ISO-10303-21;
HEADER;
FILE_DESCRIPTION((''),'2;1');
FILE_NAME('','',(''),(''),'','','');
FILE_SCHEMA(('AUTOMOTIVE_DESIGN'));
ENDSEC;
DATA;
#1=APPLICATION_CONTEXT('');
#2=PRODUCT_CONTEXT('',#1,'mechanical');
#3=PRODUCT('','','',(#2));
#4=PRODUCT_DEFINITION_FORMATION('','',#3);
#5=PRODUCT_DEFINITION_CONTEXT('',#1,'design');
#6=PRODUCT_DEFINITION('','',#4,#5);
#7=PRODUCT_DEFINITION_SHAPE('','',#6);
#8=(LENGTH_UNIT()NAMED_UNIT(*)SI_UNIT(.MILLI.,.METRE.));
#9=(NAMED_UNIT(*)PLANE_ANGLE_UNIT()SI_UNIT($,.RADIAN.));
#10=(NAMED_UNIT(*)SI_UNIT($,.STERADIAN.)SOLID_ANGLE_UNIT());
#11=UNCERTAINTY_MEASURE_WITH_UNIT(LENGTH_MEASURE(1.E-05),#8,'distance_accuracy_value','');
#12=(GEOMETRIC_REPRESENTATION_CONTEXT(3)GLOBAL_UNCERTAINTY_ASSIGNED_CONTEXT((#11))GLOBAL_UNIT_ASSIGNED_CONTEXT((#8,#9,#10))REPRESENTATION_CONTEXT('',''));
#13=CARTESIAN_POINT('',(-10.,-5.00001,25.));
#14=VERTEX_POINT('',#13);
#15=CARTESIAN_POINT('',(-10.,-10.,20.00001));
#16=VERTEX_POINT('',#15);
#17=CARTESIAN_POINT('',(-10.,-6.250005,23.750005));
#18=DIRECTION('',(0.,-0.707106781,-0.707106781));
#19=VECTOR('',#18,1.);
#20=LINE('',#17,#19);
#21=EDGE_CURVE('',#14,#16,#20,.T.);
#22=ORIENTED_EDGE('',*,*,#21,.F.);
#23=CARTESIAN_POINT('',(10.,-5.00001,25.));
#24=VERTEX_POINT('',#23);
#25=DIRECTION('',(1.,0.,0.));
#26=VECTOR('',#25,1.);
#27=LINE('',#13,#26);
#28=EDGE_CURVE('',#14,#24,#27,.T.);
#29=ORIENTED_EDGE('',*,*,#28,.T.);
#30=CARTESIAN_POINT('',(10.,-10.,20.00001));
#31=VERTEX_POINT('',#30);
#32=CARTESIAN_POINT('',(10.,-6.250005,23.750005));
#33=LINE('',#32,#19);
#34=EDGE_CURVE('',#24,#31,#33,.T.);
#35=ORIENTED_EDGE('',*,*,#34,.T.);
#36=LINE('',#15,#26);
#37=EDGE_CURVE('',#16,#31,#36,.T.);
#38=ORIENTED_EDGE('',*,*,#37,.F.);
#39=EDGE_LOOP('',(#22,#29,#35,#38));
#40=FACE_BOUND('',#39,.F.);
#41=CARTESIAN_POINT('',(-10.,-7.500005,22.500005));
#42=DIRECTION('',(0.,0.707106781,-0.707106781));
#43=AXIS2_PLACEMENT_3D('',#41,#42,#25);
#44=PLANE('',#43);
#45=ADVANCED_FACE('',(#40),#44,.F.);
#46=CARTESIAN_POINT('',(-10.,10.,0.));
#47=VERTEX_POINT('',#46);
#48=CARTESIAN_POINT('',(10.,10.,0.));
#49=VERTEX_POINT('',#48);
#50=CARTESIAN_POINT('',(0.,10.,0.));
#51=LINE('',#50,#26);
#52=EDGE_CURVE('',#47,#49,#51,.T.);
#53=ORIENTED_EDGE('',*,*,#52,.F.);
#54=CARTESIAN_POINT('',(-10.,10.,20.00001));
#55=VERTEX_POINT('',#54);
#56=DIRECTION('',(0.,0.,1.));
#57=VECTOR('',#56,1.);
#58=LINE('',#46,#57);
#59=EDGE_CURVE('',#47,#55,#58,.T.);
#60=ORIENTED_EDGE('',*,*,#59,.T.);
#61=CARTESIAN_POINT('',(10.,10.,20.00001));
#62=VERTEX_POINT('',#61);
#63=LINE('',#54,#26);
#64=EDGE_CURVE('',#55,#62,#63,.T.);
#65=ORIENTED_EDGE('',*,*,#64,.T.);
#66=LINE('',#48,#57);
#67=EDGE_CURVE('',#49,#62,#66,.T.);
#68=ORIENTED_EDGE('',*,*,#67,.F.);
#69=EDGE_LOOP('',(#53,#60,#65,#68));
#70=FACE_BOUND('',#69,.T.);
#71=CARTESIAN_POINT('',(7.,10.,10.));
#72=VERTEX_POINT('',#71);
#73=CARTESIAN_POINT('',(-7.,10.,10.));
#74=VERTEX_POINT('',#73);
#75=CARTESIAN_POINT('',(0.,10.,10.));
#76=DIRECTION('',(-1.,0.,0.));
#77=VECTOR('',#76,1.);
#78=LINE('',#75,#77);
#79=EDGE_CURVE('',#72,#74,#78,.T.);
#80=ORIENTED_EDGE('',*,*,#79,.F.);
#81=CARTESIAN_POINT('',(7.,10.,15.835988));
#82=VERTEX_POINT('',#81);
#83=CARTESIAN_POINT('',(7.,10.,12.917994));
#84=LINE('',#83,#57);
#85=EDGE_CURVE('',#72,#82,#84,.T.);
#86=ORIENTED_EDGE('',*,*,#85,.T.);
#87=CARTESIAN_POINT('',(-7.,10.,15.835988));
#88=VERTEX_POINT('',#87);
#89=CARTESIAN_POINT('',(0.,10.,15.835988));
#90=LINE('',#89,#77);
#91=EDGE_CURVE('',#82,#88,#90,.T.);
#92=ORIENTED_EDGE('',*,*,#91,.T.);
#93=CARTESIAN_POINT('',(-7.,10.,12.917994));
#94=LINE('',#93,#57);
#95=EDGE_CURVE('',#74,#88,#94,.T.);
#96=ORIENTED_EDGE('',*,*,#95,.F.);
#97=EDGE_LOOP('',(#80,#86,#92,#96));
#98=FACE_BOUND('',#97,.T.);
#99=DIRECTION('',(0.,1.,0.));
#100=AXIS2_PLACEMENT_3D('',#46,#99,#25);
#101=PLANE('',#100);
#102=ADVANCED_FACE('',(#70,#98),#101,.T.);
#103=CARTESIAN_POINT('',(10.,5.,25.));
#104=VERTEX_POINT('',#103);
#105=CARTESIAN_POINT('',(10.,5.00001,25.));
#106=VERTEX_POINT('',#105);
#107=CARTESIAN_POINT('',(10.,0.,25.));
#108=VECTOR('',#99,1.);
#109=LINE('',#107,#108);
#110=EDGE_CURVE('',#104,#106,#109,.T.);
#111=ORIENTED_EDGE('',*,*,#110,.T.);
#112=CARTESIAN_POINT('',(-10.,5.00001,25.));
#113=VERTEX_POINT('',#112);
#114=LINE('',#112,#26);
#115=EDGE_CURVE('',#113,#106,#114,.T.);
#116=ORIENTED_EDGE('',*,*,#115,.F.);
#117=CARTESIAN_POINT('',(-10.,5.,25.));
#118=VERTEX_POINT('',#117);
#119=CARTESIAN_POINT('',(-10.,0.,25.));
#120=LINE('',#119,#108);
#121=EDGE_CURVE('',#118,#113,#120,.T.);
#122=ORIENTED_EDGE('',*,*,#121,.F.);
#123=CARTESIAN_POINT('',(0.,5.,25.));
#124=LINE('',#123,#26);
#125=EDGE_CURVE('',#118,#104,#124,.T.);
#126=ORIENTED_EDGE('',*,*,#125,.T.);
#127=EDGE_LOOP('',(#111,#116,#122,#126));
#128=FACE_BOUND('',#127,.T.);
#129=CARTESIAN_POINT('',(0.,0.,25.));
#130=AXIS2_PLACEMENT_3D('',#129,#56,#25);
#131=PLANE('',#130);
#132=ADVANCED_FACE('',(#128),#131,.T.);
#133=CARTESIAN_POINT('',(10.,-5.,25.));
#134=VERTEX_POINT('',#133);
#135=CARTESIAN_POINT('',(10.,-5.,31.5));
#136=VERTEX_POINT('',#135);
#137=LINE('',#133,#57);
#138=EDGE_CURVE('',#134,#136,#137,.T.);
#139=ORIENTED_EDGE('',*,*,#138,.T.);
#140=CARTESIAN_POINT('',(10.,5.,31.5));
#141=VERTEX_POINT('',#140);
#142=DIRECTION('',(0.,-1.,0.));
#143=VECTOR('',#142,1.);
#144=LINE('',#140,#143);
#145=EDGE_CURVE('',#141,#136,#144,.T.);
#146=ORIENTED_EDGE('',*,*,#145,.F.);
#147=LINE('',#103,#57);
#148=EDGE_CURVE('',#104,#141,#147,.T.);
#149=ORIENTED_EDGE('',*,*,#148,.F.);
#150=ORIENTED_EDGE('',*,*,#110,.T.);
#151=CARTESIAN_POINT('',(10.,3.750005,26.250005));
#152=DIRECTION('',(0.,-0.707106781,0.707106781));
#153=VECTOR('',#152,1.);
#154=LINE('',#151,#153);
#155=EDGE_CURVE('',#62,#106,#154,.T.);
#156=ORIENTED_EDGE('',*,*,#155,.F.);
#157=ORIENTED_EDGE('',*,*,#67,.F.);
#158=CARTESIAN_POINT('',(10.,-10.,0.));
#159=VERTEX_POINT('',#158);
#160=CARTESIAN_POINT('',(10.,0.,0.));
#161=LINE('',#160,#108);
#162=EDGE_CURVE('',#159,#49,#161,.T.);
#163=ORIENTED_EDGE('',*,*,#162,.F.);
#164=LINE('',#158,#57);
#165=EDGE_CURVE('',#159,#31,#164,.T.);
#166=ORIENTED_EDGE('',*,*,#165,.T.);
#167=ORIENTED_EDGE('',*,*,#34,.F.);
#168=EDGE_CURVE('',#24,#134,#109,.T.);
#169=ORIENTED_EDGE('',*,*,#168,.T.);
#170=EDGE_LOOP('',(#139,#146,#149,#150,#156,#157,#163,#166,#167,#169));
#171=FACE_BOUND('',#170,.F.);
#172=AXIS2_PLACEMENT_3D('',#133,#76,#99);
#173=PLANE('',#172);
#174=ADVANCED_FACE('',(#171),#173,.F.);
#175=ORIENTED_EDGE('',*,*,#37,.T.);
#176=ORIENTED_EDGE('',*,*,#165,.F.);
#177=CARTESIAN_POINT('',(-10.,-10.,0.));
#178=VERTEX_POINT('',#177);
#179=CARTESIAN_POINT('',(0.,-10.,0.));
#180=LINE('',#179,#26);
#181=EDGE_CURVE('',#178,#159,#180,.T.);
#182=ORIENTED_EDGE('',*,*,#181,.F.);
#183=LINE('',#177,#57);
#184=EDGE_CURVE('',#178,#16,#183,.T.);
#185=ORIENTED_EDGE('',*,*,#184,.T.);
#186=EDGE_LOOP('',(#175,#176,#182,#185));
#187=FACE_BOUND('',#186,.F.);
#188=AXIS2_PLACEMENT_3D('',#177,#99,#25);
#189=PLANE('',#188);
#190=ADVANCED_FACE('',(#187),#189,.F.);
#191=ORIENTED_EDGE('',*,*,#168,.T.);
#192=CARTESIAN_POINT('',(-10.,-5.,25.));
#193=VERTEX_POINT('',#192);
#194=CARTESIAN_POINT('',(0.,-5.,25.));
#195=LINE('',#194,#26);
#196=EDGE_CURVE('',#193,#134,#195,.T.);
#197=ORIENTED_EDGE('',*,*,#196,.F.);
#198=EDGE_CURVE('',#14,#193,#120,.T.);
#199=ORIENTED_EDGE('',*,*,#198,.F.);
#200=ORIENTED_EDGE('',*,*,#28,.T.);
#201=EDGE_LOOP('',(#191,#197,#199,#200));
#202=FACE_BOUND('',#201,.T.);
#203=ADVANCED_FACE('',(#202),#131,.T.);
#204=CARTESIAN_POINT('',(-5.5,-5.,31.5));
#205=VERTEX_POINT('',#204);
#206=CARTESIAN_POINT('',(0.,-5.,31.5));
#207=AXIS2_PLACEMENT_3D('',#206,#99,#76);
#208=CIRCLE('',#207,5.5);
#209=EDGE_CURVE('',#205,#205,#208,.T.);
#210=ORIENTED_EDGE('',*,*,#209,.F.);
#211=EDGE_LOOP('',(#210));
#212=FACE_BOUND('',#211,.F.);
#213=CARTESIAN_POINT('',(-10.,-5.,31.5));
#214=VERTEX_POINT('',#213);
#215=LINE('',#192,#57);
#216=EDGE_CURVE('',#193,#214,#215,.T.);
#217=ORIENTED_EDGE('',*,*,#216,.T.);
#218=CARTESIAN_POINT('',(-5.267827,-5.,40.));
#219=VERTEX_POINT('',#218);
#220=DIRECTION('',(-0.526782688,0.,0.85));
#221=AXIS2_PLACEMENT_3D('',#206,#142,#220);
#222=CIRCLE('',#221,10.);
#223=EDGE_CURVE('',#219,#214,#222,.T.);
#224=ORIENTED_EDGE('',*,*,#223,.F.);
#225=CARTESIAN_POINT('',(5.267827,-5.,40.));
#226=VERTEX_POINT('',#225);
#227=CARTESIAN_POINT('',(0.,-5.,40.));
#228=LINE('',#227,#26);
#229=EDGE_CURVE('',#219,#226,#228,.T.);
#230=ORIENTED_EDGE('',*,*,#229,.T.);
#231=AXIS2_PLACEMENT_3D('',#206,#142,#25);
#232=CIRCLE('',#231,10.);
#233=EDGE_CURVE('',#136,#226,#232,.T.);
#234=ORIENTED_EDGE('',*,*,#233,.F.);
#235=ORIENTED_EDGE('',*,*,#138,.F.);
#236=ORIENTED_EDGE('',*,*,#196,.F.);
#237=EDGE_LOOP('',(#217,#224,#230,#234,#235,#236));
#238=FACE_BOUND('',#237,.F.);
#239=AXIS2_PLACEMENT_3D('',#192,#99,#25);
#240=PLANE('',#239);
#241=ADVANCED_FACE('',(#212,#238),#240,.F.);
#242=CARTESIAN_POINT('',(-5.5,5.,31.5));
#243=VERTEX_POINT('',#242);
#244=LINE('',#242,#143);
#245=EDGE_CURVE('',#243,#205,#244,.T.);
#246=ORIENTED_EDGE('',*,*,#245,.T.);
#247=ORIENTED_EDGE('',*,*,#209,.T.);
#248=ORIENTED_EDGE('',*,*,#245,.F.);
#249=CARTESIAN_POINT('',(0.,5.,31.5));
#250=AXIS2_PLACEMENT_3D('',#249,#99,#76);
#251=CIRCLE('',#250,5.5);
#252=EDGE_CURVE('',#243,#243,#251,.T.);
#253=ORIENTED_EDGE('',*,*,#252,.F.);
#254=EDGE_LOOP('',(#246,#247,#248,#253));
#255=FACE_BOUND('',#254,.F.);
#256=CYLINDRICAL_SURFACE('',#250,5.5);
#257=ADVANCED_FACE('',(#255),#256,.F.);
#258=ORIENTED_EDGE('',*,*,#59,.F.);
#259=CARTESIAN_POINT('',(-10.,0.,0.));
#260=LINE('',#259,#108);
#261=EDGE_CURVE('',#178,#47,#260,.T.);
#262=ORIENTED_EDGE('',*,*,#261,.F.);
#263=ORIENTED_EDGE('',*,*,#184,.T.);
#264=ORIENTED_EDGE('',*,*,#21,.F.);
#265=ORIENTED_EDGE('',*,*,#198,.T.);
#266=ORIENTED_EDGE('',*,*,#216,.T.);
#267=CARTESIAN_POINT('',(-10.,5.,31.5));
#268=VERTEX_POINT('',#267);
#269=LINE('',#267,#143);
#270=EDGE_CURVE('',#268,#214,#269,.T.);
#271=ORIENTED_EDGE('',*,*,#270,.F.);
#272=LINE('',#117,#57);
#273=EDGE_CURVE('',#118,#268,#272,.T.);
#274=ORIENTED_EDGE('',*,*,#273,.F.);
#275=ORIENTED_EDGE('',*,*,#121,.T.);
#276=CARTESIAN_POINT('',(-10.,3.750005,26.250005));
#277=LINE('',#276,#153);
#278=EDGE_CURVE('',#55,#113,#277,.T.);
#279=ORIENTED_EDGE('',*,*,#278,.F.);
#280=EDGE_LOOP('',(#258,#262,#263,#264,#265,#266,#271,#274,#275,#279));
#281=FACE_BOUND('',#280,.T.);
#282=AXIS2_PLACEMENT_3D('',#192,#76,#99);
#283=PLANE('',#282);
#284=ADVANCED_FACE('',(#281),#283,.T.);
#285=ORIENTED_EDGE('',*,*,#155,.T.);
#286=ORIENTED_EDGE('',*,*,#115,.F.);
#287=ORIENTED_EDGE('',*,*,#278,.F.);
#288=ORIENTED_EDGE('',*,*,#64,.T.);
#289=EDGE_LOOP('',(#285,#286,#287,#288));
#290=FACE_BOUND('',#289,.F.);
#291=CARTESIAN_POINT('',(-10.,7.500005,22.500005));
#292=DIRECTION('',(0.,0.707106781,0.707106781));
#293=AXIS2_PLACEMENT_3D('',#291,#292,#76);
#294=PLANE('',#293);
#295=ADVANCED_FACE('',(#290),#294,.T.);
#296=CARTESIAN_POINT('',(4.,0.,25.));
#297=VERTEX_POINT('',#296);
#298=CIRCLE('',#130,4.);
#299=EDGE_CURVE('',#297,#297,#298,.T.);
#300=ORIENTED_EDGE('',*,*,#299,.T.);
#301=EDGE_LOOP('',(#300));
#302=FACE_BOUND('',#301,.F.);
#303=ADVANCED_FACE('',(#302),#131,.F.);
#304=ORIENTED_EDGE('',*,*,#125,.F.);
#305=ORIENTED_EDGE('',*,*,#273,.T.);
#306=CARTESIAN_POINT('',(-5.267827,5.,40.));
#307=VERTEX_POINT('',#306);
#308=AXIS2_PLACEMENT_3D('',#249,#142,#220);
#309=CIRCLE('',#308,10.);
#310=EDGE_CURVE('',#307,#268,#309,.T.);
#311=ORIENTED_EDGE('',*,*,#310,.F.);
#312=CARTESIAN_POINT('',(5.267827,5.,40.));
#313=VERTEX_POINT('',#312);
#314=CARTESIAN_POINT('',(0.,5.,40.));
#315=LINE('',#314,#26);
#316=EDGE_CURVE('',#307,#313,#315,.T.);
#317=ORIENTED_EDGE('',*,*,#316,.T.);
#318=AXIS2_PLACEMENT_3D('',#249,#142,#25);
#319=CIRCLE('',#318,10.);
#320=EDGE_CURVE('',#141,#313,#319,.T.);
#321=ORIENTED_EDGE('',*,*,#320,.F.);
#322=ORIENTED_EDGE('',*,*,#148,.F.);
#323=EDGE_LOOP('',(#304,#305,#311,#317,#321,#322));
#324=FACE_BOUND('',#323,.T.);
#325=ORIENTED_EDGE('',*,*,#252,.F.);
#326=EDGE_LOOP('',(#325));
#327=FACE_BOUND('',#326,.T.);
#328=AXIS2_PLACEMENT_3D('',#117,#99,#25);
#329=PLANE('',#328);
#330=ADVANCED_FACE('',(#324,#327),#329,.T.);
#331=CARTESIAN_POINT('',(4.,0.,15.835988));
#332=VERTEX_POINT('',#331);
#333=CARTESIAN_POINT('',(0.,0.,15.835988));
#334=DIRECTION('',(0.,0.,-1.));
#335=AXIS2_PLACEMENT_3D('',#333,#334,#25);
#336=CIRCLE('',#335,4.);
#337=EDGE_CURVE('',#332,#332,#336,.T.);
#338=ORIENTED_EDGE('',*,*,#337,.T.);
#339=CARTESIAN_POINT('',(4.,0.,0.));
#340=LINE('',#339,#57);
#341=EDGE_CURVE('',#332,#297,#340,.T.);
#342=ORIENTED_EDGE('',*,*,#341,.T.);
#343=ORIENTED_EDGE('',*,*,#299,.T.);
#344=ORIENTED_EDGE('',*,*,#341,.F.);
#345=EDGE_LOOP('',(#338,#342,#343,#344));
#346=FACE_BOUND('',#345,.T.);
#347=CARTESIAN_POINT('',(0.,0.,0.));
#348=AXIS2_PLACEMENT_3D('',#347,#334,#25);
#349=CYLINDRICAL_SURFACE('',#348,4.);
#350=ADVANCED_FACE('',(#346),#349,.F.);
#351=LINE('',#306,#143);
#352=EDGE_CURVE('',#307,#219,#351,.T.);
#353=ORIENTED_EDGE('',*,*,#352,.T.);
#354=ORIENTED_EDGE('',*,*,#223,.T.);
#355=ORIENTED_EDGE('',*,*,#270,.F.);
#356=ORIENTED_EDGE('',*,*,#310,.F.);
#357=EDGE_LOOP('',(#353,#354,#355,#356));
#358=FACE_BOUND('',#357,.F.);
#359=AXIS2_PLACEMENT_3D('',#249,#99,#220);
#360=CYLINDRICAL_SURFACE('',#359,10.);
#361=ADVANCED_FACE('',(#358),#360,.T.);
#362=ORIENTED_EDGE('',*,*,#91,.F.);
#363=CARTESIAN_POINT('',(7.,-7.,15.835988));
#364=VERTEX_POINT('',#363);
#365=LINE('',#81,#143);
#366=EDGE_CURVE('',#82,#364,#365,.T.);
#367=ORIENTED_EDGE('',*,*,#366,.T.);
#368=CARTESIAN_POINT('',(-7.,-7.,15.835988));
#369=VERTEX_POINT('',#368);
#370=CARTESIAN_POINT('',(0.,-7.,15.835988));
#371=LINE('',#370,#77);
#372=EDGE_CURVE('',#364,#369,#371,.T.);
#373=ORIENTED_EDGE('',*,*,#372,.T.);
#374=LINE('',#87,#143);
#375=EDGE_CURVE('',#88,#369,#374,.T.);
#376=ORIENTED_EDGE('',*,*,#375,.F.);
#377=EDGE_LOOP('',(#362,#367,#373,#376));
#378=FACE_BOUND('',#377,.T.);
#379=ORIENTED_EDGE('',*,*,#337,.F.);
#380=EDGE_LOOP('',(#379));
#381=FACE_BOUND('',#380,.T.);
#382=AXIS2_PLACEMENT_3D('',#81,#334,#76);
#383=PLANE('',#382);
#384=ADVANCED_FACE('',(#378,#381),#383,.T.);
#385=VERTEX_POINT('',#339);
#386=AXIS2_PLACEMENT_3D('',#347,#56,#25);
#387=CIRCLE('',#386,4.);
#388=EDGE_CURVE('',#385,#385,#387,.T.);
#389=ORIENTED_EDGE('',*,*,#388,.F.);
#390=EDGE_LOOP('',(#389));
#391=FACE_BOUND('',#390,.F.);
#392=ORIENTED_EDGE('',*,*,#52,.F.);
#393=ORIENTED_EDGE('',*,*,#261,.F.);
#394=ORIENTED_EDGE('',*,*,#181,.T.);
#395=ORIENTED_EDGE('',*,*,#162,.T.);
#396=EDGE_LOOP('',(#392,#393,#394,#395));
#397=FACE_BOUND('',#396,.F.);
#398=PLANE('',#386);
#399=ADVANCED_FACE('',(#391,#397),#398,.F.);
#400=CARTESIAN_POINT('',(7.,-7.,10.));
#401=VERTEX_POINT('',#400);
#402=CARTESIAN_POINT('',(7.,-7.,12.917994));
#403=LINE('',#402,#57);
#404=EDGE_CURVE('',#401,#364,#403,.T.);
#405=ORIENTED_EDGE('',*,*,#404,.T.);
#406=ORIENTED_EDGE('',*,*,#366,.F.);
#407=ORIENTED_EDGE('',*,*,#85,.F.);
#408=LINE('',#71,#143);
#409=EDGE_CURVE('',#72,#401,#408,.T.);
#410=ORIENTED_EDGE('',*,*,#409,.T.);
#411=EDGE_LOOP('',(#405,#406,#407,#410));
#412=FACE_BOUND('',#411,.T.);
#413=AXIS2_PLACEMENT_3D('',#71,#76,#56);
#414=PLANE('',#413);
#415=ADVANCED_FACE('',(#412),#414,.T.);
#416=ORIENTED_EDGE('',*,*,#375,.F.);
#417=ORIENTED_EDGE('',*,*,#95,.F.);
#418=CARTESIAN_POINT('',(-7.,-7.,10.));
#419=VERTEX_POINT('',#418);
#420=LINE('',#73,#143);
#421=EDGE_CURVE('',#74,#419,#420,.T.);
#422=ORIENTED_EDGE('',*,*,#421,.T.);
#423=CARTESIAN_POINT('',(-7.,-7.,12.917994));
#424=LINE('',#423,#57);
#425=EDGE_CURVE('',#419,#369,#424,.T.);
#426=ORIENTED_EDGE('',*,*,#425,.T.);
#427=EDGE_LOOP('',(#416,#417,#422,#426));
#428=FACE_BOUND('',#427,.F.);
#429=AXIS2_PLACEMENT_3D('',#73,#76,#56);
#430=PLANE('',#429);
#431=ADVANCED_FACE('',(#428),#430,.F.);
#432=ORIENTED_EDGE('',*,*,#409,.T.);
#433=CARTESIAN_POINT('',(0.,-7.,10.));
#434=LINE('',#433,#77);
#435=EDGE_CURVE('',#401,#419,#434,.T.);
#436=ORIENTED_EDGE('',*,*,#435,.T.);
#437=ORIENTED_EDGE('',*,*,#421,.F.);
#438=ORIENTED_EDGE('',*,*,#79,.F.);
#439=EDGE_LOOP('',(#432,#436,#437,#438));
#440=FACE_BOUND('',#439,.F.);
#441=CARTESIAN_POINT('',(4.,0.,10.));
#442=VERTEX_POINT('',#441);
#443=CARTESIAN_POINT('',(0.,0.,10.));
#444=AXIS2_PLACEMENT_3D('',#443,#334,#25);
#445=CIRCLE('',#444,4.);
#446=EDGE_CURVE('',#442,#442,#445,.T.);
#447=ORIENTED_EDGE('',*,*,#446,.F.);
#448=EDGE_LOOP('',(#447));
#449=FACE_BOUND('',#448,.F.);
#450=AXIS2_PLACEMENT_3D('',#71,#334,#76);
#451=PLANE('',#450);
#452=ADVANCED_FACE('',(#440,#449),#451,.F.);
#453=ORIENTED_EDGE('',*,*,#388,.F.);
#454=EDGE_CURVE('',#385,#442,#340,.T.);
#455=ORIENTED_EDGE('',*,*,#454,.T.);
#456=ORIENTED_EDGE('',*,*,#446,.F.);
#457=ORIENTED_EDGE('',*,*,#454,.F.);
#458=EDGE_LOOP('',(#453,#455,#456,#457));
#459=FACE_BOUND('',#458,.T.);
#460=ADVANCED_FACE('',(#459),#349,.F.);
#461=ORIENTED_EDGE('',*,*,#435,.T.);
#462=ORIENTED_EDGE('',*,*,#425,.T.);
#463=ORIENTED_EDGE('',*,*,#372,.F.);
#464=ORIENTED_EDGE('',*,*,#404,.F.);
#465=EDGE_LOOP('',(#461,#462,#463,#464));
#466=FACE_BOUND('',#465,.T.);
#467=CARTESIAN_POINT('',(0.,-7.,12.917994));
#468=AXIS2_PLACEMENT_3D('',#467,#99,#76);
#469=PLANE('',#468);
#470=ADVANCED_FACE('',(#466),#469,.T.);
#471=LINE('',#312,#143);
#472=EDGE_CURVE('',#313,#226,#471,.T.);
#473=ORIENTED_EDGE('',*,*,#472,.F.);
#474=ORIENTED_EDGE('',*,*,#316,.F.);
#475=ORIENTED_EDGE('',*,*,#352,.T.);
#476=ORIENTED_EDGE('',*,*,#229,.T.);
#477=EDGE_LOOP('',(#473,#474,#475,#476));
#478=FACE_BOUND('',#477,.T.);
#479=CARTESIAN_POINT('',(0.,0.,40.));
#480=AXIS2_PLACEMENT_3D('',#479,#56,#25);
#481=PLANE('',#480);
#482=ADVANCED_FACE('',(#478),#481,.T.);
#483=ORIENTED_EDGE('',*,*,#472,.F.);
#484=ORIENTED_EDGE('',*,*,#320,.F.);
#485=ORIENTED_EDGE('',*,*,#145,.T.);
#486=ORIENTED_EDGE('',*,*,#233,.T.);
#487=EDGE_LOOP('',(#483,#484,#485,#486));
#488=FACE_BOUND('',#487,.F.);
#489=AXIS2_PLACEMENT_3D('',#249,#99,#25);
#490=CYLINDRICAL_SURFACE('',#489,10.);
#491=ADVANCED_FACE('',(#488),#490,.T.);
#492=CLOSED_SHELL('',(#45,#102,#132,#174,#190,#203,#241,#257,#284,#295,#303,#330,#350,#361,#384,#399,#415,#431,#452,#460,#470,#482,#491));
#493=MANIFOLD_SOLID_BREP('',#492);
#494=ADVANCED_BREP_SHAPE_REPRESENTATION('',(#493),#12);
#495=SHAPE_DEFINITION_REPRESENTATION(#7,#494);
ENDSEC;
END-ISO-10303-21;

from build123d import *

# Parameters (mm, degrees)
F0_W      = 20
F0_H      = 20
F0_R      = 4
F1_DEPTH  = 25
F3_W      = 14
F3_H      = 5.8359876275
F4_DEPTH  = 17
F6_W      = 20
F6_H      = 10
F7_DEPTH  = 15
F10_DEPTH = 10
F9_R      = 5.5
F11_DEPTH = 10
F12_SIZE  = 4.99999


# Not quite as in the source:
# - a fillet or chamfer is up to 0.001 mm smaller than in the source, because OpenCascade refuses the exact size


with BuildPart() as f1:
    # F0 (on Top) → F1 (new body)
    with BuildSketch(Plane.XY):
        Rectangle(F0_W, F0_H)
        Circle(F0_R, mode=Mode.SUBTRACT)
    extrude(amount=F1_DEPTH)

    # F3 (on offset) → F4 (cut)
    with BuildSketch(Plane(origin=(0, 10, 0), x_dir=(-1, 0, 0), z_dir=(0, 1, 0))):
        with Locations((0, 12.9179938138)):
            Rectangle(F3_W, F3_H)
    extrude(amount=-F4_DEPTH, mode=Mode.SUBTRACT)

    # F6 (on offset) → F7 (join)
    with BuildSketch(Plane.XY.offset(25)):
        Rectangle(F6_W, F6_H)
    extrude(amount=F7_DEPTH)

    # F9 (on offset) → F10 (cut)
    with BuildSketch(Plane(origin=(0, 5, 0), x_dir=(-1, 0, 0), z_dir=(0, 1, 0))):
        with BuildLine():
            Line((-5.2678268764, 40), (-10, 40))
            Line((-10, 40), (-10, 31.5))
            ThreePointArc((-10, 31.5), (-8.7372269275, 36.3642435813), (-5.2678268764, 40))
        make_face()
        with BuildLine():
            Line((10, 40), (5.2678268764, 40))
            ThreePointArc((5.2678268764, 40), (8.7372269275, 36.3642435813), (10, 31.5))
            Line((10, 31.5), (10, 40))
        make_face()
    extrude(amount=-F10_DEPTH, mode=Mode.SUBTRACT)

    # F9 (on offset) → F11 (cut)
    with BuildSketch(Plane(origin=(0, 5, 0), x_dir=(-1, 0, 0), z_dir=(0, 1, 0))):
        with Locations((0, 31.5)):
            Circle(F9_R)
    extrude(amount=-F11_DEPTH, mode=Mode.SUBTRACT)

    # F12 (size 5 in the source; OpenCascade refuses exactly that, so slightly less here)
    f12_edges = [f1.edges().sort_by_distance(p)[0] for p in [
        (0, -10, 25),
        (0, 10, 25),
    ]]
    chamfer(f12_edges, length=F12_SIZE)


solid = f1.part
